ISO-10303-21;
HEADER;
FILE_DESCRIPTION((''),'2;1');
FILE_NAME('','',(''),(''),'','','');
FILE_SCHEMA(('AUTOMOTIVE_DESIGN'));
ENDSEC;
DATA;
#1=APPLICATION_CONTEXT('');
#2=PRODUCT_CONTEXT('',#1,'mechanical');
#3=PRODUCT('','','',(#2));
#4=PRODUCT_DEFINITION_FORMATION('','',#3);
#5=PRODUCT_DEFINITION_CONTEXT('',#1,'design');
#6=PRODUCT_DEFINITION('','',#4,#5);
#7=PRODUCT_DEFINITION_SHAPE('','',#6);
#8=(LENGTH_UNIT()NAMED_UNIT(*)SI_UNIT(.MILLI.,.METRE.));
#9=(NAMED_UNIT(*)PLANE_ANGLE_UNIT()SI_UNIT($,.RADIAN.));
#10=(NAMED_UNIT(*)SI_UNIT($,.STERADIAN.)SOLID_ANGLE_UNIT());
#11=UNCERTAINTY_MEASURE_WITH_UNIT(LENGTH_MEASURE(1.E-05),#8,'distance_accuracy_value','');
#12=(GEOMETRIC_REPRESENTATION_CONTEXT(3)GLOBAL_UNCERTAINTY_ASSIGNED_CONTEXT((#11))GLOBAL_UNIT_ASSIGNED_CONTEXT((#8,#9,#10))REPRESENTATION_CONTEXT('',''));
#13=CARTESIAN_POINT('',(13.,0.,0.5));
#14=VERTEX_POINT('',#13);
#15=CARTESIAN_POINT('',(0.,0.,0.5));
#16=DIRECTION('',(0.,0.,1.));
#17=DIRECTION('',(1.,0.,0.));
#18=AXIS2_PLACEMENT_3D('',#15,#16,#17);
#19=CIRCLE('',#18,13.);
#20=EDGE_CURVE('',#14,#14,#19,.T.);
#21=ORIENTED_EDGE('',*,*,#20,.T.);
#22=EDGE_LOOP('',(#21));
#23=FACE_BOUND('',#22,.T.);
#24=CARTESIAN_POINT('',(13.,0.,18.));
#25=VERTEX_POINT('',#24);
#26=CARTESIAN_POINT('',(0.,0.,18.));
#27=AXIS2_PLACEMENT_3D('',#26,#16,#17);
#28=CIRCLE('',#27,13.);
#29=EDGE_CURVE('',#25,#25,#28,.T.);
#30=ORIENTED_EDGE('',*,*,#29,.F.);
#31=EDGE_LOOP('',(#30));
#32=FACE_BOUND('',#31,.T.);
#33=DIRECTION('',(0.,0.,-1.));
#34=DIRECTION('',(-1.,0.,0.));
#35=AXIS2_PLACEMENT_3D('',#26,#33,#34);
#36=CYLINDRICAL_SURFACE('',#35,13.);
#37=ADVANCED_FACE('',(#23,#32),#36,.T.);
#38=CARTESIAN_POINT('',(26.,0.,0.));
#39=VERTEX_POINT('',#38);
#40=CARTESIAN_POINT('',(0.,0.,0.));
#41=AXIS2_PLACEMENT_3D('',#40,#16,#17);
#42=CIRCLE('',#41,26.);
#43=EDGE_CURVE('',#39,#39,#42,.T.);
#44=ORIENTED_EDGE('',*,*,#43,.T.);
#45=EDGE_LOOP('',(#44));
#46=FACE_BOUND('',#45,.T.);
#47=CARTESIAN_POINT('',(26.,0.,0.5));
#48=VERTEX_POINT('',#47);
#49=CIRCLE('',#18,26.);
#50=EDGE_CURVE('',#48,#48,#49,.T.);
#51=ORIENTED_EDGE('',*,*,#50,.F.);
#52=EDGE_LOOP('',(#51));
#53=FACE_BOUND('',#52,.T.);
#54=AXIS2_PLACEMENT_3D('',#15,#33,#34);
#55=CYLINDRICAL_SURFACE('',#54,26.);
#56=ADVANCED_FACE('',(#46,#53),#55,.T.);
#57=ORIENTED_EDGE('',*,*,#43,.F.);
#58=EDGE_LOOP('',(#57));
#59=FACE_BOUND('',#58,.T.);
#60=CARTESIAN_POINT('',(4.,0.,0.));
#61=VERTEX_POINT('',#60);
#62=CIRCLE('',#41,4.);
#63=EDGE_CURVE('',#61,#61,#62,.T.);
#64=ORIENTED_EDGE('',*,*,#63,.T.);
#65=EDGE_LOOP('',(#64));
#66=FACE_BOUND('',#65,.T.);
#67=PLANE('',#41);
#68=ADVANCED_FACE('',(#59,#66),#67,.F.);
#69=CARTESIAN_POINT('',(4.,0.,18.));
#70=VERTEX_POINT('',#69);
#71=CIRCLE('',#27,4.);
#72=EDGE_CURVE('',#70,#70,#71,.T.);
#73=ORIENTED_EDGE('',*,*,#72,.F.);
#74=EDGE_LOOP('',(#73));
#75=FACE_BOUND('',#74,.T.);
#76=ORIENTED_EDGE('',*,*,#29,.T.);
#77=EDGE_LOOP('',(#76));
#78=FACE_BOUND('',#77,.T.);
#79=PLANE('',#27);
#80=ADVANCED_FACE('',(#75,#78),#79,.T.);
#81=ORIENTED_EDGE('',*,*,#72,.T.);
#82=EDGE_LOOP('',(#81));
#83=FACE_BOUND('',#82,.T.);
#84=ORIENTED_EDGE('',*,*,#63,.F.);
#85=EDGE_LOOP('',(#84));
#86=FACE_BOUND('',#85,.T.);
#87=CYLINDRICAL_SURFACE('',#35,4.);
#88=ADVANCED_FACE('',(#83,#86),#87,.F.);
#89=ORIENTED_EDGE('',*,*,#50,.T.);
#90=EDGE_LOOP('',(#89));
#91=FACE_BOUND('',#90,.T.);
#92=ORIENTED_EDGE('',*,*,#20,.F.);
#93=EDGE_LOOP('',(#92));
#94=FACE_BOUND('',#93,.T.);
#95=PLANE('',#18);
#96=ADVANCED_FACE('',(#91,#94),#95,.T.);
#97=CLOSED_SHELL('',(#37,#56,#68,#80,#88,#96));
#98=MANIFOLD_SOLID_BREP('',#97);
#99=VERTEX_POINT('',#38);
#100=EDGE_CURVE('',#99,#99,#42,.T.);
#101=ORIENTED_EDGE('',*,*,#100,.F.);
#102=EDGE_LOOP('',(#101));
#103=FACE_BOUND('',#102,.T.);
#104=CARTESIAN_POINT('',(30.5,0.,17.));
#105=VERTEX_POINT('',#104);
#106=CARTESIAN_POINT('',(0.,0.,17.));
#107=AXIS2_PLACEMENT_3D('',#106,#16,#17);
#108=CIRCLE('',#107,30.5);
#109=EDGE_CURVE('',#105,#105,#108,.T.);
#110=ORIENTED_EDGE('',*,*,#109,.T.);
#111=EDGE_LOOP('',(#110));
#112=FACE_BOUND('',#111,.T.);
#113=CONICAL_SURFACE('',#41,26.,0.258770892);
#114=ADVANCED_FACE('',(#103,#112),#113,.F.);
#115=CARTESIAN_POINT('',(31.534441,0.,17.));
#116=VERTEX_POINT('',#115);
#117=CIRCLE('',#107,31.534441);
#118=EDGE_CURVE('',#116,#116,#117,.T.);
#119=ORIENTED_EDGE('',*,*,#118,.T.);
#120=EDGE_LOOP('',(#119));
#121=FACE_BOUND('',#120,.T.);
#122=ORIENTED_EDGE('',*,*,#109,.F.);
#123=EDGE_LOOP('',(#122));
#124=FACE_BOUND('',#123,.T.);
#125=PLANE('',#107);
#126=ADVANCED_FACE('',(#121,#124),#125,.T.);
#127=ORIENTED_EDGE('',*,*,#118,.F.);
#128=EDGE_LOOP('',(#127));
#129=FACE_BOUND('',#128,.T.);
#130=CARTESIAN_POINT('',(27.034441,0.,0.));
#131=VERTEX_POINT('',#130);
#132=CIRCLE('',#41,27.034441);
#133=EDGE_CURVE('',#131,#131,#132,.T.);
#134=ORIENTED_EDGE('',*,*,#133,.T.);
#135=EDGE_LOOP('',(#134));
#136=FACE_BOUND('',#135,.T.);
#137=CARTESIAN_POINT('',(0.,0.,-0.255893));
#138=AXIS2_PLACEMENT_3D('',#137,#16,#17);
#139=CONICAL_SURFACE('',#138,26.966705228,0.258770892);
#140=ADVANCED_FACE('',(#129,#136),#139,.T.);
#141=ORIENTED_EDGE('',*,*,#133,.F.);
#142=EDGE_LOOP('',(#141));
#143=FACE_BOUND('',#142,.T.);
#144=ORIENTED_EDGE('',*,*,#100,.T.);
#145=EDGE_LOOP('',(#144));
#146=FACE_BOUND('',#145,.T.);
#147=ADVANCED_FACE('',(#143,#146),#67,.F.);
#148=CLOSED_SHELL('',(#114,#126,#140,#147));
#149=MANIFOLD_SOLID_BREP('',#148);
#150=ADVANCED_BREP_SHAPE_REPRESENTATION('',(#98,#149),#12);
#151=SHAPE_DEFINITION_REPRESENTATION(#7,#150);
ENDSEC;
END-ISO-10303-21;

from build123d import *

# Parameters (mm, degrees)
SKETCH_1_R          = 26
SKETCH_1_R_2        = 13
EXTRUDE_1_DEPTH     = 0.5
SKETCH_7_R          = 13
SKETCH_7_R_2        = 4
BOSS_EXTRUDE1_DEPTH = 18


# Read off the part's stored shape, not the designer's step: По сечениям-Тонкостенный1
with BuildPart() as part:
    # Эскиз1 → Вытянуть1 (new body)
    with BuildSketch(Plane.XY):
        Circle(SKETCH_1_R)
        Circle(SKETCH_1_R_2, mode=Mode.SUBTRACT)
    extrude(amount=EXTRUDE_1_DEPTH)

    # Эскиз7 → Boss-Extrude1 (add)
    with BuildSketch(Plane.XY):
        Circle(SKETCH_7_R)
        Circle(SKETCH_7_R_2, mode=Mode.SUBTRACT)
    extrude(amount=BOSS_EXTRUDE1_DEPTH)


with BuildPart() as body_2:
    # По сечениям-Тонкостенный1 outline → По сечениям-Тонкостенный1 (revolve)
    with BuildSketch(Plane.XZ):
        Polygon((30.5, 17), (26, 0), (27.034441494, 0), (31.534441494, 17), align=None)
    revolve(axis=Axis((0, 0, 0), (0, 0, 1)))


solid = Compound([part.part, body_2.part])
